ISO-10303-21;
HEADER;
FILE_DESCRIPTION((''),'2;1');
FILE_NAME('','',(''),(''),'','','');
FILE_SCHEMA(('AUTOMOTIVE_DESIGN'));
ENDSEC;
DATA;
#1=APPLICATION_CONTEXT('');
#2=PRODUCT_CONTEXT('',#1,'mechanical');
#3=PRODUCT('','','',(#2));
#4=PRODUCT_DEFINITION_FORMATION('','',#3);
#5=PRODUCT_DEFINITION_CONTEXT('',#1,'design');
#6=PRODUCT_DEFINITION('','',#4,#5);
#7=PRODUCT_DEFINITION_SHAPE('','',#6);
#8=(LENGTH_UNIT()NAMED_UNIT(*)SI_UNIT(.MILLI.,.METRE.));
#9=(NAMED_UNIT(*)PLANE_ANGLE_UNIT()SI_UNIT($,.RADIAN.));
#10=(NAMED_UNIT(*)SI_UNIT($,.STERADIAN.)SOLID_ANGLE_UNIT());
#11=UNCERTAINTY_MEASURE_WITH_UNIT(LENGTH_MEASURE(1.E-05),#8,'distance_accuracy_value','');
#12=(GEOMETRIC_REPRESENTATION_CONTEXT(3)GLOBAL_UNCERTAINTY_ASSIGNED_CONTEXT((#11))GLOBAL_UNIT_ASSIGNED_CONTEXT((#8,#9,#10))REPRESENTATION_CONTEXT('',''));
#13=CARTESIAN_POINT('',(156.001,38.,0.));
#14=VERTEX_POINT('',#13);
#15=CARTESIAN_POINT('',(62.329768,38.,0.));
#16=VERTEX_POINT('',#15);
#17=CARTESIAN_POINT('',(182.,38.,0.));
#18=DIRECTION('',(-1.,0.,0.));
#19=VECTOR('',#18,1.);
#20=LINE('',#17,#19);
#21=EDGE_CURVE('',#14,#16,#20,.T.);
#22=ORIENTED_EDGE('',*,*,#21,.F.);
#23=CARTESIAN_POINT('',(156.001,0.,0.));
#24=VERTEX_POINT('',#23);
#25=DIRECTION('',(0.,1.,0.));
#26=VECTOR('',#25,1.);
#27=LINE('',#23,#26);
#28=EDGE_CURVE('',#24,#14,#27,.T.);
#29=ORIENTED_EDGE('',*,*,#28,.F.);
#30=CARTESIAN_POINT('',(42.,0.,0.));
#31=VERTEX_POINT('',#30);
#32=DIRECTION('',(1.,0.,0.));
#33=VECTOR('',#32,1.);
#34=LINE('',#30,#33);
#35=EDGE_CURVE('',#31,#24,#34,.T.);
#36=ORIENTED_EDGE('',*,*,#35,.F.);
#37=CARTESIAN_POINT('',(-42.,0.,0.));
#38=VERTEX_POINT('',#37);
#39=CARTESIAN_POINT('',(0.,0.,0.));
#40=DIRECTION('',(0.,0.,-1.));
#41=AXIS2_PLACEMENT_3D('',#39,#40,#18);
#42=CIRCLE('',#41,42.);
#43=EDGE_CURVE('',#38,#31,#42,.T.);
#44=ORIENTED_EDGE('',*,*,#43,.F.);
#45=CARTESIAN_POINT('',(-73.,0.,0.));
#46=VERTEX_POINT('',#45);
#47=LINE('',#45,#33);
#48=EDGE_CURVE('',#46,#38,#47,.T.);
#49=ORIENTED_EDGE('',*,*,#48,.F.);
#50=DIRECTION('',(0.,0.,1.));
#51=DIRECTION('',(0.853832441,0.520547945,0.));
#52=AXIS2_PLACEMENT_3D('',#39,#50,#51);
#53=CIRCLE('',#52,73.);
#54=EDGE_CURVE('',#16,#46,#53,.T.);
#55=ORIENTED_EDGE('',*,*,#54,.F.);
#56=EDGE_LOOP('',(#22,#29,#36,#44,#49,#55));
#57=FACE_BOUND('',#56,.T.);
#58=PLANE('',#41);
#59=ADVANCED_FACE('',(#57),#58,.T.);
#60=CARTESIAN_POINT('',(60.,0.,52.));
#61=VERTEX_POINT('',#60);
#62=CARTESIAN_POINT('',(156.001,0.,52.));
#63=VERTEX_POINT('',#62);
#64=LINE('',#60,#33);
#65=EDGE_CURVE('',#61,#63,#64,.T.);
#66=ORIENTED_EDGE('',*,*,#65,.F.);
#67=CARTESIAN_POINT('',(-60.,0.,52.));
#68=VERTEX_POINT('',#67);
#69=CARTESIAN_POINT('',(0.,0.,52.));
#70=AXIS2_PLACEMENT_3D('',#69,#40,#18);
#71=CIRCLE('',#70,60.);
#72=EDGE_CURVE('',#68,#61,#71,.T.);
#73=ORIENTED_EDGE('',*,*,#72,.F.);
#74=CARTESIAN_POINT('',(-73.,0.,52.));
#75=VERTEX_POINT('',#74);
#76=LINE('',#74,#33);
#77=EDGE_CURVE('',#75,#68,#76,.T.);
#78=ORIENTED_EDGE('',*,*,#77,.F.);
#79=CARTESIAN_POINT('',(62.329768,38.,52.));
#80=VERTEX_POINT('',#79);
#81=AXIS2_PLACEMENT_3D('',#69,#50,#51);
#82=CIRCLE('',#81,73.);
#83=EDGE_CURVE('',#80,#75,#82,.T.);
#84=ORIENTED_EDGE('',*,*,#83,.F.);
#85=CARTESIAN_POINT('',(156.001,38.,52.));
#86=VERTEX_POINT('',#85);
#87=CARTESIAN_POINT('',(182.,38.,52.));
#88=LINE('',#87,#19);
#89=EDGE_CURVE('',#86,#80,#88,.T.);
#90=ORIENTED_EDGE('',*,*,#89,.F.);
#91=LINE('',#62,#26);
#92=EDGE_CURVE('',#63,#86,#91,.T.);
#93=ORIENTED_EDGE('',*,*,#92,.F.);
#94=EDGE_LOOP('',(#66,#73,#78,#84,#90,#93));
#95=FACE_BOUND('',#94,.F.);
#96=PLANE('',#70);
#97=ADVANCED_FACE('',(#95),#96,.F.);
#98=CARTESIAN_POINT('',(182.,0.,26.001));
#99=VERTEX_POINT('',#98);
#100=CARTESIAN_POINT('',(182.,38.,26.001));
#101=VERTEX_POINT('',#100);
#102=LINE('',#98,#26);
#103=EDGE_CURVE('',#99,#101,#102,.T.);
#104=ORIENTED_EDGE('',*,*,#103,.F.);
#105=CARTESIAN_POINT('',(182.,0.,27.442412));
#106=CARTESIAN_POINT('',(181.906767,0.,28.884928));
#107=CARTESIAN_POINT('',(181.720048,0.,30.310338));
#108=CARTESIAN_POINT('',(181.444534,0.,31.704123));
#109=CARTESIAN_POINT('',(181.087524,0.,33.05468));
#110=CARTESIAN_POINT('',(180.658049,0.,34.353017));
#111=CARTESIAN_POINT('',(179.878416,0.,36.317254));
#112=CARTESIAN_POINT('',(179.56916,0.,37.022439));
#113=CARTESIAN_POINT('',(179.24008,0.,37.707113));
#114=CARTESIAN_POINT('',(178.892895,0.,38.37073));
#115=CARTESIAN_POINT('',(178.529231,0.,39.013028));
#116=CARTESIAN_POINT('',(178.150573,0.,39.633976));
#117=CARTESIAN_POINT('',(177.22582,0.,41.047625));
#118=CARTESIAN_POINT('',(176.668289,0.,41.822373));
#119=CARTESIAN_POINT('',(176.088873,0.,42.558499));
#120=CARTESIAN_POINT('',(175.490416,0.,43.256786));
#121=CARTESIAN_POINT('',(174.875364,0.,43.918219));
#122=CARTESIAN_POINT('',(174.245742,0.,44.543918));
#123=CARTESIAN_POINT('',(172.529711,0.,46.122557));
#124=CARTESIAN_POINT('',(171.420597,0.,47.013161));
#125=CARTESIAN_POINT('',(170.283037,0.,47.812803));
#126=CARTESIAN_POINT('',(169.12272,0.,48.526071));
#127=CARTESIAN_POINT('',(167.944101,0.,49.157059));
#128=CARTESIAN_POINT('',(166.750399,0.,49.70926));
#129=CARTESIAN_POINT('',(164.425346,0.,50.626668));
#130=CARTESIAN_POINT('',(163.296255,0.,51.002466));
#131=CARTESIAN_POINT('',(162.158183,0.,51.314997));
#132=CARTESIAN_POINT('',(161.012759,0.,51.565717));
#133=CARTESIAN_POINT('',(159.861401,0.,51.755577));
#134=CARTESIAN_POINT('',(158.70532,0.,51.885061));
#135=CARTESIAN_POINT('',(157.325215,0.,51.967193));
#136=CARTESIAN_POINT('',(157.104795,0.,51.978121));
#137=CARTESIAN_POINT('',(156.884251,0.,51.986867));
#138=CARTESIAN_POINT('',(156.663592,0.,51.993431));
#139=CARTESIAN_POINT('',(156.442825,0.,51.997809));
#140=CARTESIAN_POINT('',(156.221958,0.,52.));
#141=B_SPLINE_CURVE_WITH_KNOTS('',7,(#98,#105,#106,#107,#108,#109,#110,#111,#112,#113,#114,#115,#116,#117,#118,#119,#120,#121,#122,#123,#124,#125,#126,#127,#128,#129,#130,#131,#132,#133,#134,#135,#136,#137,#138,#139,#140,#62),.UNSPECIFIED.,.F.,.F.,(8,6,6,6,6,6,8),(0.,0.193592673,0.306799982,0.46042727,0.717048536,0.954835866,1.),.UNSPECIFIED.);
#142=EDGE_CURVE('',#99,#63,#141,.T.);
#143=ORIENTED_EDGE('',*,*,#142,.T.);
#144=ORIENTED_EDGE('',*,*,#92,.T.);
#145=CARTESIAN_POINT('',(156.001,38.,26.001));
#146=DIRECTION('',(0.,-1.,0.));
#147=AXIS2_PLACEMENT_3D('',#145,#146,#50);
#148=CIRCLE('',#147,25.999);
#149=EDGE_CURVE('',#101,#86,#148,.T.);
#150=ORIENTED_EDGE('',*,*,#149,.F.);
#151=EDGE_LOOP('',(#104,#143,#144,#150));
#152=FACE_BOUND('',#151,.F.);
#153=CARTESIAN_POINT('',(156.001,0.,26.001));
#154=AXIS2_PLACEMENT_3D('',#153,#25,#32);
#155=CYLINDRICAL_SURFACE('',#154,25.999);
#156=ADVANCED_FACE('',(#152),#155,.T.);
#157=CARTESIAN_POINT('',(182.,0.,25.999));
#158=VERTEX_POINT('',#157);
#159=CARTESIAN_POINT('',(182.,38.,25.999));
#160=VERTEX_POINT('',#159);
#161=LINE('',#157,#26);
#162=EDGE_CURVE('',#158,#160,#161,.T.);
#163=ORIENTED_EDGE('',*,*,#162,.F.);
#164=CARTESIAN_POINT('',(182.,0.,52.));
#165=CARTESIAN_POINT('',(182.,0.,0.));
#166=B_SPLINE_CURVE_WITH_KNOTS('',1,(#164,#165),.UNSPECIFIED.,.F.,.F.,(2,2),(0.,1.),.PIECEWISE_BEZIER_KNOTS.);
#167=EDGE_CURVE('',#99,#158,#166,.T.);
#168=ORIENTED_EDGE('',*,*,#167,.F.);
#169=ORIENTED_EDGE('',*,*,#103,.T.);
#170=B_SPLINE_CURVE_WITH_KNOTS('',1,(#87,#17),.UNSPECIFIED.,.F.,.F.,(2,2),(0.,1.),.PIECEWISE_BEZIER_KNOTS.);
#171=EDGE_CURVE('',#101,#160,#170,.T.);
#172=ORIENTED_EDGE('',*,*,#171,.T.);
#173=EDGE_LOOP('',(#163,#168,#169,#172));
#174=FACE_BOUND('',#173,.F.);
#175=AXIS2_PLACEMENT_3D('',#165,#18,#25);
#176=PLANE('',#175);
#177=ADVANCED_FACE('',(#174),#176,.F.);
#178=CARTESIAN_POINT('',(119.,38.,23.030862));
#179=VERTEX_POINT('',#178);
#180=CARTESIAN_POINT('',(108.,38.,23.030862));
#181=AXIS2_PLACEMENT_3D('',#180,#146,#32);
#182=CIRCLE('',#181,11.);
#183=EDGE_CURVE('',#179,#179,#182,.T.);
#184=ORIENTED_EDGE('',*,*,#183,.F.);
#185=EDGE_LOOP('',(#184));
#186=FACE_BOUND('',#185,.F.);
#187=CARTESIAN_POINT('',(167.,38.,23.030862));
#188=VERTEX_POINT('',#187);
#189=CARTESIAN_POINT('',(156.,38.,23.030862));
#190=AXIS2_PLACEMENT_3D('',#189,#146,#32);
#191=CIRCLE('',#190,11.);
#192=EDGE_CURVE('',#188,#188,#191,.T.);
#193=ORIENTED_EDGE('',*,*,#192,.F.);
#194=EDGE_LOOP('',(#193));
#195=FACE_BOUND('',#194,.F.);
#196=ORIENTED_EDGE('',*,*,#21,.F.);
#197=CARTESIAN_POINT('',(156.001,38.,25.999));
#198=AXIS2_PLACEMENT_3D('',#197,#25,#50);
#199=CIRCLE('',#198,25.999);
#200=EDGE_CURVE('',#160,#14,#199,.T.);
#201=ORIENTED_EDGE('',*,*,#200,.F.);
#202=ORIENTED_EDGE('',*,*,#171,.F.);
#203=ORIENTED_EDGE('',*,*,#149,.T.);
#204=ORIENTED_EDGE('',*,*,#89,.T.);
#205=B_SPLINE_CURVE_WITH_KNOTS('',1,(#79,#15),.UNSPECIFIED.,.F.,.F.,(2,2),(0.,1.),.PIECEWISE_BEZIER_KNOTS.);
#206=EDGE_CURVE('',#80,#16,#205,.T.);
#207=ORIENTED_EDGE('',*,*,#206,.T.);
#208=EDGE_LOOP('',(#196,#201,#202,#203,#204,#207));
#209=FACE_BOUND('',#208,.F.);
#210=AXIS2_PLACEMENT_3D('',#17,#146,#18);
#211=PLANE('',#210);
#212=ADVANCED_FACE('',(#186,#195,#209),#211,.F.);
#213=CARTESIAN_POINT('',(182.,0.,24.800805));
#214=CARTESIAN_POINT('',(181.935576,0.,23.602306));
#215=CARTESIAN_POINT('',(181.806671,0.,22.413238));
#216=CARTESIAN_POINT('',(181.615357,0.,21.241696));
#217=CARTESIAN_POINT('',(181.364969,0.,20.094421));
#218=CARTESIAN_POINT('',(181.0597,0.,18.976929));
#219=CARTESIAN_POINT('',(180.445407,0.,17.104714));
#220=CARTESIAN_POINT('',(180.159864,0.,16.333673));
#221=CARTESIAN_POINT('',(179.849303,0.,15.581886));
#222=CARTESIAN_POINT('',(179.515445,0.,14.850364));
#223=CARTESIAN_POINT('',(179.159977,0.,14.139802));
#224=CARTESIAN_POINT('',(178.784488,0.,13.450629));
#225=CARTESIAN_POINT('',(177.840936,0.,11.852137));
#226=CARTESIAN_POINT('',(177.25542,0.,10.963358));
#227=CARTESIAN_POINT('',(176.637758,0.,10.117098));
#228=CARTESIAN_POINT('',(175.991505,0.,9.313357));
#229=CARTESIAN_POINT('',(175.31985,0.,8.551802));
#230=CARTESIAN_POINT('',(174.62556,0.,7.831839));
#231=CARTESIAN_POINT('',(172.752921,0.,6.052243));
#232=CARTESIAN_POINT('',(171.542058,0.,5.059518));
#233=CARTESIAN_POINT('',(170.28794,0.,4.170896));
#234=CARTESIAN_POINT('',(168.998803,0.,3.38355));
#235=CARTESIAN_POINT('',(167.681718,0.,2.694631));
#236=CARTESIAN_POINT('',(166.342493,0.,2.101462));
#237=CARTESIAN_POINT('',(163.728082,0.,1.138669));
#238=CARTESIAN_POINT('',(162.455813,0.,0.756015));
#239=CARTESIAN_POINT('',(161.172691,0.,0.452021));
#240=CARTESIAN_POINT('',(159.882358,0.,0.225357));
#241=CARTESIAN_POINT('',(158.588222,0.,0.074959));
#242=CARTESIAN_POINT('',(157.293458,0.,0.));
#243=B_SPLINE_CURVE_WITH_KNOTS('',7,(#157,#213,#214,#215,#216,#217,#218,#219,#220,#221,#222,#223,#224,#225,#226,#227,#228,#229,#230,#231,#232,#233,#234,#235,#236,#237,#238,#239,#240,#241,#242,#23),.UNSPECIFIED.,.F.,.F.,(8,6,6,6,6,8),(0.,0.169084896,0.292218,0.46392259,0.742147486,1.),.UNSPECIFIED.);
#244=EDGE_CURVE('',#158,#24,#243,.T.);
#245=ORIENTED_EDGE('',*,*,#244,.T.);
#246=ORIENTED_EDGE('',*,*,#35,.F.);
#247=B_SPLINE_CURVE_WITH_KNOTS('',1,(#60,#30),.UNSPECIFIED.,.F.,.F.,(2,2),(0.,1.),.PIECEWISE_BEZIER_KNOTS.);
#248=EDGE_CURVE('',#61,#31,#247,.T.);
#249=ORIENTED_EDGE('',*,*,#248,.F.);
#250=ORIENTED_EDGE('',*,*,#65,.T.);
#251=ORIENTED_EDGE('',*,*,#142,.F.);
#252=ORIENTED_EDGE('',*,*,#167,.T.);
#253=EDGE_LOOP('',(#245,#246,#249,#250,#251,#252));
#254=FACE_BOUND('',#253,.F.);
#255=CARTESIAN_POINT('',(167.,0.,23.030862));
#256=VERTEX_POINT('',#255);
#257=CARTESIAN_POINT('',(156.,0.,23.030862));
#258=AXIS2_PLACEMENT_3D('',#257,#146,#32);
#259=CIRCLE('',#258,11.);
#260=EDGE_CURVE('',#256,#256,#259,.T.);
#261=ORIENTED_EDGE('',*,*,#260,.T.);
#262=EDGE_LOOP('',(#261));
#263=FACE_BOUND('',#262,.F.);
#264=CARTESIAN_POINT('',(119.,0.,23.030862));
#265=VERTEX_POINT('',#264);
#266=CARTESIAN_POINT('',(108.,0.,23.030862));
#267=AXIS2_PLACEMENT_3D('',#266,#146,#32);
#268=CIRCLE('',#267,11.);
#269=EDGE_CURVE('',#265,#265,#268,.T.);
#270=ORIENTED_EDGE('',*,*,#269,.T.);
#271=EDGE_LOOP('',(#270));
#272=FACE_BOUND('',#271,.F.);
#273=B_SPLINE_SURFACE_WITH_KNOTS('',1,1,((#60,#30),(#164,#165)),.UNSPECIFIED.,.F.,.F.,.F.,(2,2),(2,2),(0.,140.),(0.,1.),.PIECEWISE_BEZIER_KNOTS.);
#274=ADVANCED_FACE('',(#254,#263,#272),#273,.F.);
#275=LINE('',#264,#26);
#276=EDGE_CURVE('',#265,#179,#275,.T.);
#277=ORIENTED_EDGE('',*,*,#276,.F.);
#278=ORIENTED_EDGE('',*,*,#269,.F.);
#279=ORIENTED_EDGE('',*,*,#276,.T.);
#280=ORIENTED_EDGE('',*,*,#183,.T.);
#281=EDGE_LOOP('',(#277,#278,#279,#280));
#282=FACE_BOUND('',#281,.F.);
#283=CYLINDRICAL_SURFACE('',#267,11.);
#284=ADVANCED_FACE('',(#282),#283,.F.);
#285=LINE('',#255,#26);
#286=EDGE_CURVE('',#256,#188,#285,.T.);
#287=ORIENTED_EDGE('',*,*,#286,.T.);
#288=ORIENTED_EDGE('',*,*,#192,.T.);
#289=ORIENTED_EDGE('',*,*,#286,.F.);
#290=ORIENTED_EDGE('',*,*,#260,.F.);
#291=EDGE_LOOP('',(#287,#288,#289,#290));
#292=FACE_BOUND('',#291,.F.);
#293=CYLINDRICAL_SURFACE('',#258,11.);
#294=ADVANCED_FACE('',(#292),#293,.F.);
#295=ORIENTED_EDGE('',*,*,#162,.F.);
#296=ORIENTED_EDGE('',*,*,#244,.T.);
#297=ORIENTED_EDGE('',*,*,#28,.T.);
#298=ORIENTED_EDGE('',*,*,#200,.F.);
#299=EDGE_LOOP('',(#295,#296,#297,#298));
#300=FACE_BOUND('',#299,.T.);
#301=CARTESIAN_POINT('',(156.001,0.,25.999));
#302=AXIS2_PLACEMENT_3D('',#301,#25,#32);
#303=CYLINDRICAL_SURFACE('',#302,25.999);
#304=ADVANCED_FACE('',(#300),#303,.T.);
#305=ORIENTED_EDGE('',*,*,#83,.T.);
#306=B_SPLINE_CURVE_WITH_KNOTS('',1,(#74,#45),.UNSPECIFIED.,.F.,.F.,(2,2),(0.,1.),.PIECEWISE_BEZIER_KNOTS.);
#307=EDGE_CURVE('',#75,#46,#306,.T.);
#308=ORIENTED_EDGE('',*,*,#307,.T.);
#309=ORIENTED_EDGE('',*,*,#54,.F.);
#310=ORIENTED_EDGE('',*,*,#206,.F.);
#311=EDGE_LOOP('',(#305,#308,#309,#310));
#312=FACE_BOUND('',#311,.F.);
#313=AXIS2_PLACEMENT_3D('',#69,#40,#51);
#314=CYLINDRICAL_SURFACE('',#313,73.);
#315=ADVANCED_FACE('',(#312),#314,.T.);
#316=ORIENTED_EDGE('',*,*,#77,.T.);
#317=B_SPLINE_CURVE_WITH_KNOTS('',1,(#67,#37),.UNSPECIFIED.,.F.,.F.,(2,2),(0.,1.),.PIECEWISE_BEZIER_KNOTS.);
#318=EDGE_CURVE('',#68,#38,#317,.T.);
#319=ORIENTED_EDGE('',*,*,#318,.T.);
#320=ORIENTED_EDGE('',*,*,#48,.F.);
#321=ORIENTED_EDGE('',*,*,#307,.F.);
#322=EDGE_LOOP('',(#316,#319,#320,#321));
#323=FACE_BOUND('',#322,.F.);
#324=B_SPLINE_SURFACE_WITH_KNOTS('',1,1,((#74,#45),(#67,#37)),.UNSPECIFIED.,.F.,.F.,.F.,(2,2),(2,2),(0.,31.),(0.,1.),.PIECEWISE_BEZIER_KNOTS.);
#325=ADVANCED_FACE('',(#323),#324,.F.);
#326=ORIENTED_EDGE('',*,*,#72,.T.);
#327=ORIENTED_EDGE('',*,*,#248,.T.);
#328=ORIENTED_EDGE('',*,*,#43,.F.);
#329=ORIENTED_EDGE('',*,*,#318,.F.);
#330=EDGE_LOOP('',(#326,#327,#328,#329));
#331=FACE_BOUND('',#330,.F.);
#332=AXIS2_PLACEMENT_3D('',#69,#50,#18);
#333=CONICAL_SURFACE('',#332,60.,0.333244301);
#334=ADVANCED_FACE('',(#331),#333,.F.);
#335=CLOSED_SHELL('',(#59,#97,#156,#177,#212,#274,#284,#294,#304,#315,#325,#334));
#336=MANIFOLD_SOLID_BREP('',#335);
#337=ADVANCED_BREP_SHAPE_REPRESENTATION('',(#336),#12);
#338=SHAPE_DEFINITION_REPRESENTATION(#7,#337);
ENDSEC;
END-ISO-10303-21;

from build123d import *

# Parameters (mm, degrees)
F4_R     = 25.999
F5_R     = 11
F6_DEPTH = 73.0010001


# Not quite as in the source:
# - a fillet or chamfer is up to 0.001 mm smaller than in the source, because OpenCascade refuses the exact size


with BuildPart() as f3:
    # F2 (on offset) → F3 section 0
    with BuildSketch(Plane.XY.offset(52)):
        with BuildLine():
            ThreePointArc((-60, 0), (0, 60), (60, 0))
            Line((60, 0), (182, 0))
            Line((182, 0), (182, 38))
            Line((182, 38), (62.329768169, 38))
            ThreePointArc((62.329768169, 38), (-19.7348286497, 70.2818364741), (-73, 0))
            Line((-73, 0), (-60, 0))
        make_face()
    # F0 (on Top) → F3 section 1
    with BuildSketch(Plane.XY):
        with BuildLine():
            ThreePointArc((-42, 0), (0, 42), (42, 0))
            Line((42, 0), (182, 0))
            Line((182, 0), (182, 38))
            Line((182, 38), (62.329768169, 38))
            ThreePointArc((62.329768169, 38), (-19.7348286497, 70.2818364741), (-73, 0))
            Line((-73, 0), (-42, 0))
        make_face()
    loft()

    # F4 (radius 26 in the source; OpenCascade refuses exactly that, so slightly less here)
    f4_edges = [f3.edges().sort_by_distance(p)[0] for p in [
        (182, 19, 52),
        (182, 19, 0),
    ]]
    fillet(f4_edges, radius=F4_R)

    # F5 (on face) → F6 (cut, through all)
    with BuildSketch(Plane.XZ):
        with Locations((108, 23.0308622122)):
            Circle(F5_R)
        with Locations((156, 23.0308622122)):
            Circle(F5_R)
    extrude(amount=-F6_DEPTH, mode=Mode.SUBTRACT)


solid = f3.part
